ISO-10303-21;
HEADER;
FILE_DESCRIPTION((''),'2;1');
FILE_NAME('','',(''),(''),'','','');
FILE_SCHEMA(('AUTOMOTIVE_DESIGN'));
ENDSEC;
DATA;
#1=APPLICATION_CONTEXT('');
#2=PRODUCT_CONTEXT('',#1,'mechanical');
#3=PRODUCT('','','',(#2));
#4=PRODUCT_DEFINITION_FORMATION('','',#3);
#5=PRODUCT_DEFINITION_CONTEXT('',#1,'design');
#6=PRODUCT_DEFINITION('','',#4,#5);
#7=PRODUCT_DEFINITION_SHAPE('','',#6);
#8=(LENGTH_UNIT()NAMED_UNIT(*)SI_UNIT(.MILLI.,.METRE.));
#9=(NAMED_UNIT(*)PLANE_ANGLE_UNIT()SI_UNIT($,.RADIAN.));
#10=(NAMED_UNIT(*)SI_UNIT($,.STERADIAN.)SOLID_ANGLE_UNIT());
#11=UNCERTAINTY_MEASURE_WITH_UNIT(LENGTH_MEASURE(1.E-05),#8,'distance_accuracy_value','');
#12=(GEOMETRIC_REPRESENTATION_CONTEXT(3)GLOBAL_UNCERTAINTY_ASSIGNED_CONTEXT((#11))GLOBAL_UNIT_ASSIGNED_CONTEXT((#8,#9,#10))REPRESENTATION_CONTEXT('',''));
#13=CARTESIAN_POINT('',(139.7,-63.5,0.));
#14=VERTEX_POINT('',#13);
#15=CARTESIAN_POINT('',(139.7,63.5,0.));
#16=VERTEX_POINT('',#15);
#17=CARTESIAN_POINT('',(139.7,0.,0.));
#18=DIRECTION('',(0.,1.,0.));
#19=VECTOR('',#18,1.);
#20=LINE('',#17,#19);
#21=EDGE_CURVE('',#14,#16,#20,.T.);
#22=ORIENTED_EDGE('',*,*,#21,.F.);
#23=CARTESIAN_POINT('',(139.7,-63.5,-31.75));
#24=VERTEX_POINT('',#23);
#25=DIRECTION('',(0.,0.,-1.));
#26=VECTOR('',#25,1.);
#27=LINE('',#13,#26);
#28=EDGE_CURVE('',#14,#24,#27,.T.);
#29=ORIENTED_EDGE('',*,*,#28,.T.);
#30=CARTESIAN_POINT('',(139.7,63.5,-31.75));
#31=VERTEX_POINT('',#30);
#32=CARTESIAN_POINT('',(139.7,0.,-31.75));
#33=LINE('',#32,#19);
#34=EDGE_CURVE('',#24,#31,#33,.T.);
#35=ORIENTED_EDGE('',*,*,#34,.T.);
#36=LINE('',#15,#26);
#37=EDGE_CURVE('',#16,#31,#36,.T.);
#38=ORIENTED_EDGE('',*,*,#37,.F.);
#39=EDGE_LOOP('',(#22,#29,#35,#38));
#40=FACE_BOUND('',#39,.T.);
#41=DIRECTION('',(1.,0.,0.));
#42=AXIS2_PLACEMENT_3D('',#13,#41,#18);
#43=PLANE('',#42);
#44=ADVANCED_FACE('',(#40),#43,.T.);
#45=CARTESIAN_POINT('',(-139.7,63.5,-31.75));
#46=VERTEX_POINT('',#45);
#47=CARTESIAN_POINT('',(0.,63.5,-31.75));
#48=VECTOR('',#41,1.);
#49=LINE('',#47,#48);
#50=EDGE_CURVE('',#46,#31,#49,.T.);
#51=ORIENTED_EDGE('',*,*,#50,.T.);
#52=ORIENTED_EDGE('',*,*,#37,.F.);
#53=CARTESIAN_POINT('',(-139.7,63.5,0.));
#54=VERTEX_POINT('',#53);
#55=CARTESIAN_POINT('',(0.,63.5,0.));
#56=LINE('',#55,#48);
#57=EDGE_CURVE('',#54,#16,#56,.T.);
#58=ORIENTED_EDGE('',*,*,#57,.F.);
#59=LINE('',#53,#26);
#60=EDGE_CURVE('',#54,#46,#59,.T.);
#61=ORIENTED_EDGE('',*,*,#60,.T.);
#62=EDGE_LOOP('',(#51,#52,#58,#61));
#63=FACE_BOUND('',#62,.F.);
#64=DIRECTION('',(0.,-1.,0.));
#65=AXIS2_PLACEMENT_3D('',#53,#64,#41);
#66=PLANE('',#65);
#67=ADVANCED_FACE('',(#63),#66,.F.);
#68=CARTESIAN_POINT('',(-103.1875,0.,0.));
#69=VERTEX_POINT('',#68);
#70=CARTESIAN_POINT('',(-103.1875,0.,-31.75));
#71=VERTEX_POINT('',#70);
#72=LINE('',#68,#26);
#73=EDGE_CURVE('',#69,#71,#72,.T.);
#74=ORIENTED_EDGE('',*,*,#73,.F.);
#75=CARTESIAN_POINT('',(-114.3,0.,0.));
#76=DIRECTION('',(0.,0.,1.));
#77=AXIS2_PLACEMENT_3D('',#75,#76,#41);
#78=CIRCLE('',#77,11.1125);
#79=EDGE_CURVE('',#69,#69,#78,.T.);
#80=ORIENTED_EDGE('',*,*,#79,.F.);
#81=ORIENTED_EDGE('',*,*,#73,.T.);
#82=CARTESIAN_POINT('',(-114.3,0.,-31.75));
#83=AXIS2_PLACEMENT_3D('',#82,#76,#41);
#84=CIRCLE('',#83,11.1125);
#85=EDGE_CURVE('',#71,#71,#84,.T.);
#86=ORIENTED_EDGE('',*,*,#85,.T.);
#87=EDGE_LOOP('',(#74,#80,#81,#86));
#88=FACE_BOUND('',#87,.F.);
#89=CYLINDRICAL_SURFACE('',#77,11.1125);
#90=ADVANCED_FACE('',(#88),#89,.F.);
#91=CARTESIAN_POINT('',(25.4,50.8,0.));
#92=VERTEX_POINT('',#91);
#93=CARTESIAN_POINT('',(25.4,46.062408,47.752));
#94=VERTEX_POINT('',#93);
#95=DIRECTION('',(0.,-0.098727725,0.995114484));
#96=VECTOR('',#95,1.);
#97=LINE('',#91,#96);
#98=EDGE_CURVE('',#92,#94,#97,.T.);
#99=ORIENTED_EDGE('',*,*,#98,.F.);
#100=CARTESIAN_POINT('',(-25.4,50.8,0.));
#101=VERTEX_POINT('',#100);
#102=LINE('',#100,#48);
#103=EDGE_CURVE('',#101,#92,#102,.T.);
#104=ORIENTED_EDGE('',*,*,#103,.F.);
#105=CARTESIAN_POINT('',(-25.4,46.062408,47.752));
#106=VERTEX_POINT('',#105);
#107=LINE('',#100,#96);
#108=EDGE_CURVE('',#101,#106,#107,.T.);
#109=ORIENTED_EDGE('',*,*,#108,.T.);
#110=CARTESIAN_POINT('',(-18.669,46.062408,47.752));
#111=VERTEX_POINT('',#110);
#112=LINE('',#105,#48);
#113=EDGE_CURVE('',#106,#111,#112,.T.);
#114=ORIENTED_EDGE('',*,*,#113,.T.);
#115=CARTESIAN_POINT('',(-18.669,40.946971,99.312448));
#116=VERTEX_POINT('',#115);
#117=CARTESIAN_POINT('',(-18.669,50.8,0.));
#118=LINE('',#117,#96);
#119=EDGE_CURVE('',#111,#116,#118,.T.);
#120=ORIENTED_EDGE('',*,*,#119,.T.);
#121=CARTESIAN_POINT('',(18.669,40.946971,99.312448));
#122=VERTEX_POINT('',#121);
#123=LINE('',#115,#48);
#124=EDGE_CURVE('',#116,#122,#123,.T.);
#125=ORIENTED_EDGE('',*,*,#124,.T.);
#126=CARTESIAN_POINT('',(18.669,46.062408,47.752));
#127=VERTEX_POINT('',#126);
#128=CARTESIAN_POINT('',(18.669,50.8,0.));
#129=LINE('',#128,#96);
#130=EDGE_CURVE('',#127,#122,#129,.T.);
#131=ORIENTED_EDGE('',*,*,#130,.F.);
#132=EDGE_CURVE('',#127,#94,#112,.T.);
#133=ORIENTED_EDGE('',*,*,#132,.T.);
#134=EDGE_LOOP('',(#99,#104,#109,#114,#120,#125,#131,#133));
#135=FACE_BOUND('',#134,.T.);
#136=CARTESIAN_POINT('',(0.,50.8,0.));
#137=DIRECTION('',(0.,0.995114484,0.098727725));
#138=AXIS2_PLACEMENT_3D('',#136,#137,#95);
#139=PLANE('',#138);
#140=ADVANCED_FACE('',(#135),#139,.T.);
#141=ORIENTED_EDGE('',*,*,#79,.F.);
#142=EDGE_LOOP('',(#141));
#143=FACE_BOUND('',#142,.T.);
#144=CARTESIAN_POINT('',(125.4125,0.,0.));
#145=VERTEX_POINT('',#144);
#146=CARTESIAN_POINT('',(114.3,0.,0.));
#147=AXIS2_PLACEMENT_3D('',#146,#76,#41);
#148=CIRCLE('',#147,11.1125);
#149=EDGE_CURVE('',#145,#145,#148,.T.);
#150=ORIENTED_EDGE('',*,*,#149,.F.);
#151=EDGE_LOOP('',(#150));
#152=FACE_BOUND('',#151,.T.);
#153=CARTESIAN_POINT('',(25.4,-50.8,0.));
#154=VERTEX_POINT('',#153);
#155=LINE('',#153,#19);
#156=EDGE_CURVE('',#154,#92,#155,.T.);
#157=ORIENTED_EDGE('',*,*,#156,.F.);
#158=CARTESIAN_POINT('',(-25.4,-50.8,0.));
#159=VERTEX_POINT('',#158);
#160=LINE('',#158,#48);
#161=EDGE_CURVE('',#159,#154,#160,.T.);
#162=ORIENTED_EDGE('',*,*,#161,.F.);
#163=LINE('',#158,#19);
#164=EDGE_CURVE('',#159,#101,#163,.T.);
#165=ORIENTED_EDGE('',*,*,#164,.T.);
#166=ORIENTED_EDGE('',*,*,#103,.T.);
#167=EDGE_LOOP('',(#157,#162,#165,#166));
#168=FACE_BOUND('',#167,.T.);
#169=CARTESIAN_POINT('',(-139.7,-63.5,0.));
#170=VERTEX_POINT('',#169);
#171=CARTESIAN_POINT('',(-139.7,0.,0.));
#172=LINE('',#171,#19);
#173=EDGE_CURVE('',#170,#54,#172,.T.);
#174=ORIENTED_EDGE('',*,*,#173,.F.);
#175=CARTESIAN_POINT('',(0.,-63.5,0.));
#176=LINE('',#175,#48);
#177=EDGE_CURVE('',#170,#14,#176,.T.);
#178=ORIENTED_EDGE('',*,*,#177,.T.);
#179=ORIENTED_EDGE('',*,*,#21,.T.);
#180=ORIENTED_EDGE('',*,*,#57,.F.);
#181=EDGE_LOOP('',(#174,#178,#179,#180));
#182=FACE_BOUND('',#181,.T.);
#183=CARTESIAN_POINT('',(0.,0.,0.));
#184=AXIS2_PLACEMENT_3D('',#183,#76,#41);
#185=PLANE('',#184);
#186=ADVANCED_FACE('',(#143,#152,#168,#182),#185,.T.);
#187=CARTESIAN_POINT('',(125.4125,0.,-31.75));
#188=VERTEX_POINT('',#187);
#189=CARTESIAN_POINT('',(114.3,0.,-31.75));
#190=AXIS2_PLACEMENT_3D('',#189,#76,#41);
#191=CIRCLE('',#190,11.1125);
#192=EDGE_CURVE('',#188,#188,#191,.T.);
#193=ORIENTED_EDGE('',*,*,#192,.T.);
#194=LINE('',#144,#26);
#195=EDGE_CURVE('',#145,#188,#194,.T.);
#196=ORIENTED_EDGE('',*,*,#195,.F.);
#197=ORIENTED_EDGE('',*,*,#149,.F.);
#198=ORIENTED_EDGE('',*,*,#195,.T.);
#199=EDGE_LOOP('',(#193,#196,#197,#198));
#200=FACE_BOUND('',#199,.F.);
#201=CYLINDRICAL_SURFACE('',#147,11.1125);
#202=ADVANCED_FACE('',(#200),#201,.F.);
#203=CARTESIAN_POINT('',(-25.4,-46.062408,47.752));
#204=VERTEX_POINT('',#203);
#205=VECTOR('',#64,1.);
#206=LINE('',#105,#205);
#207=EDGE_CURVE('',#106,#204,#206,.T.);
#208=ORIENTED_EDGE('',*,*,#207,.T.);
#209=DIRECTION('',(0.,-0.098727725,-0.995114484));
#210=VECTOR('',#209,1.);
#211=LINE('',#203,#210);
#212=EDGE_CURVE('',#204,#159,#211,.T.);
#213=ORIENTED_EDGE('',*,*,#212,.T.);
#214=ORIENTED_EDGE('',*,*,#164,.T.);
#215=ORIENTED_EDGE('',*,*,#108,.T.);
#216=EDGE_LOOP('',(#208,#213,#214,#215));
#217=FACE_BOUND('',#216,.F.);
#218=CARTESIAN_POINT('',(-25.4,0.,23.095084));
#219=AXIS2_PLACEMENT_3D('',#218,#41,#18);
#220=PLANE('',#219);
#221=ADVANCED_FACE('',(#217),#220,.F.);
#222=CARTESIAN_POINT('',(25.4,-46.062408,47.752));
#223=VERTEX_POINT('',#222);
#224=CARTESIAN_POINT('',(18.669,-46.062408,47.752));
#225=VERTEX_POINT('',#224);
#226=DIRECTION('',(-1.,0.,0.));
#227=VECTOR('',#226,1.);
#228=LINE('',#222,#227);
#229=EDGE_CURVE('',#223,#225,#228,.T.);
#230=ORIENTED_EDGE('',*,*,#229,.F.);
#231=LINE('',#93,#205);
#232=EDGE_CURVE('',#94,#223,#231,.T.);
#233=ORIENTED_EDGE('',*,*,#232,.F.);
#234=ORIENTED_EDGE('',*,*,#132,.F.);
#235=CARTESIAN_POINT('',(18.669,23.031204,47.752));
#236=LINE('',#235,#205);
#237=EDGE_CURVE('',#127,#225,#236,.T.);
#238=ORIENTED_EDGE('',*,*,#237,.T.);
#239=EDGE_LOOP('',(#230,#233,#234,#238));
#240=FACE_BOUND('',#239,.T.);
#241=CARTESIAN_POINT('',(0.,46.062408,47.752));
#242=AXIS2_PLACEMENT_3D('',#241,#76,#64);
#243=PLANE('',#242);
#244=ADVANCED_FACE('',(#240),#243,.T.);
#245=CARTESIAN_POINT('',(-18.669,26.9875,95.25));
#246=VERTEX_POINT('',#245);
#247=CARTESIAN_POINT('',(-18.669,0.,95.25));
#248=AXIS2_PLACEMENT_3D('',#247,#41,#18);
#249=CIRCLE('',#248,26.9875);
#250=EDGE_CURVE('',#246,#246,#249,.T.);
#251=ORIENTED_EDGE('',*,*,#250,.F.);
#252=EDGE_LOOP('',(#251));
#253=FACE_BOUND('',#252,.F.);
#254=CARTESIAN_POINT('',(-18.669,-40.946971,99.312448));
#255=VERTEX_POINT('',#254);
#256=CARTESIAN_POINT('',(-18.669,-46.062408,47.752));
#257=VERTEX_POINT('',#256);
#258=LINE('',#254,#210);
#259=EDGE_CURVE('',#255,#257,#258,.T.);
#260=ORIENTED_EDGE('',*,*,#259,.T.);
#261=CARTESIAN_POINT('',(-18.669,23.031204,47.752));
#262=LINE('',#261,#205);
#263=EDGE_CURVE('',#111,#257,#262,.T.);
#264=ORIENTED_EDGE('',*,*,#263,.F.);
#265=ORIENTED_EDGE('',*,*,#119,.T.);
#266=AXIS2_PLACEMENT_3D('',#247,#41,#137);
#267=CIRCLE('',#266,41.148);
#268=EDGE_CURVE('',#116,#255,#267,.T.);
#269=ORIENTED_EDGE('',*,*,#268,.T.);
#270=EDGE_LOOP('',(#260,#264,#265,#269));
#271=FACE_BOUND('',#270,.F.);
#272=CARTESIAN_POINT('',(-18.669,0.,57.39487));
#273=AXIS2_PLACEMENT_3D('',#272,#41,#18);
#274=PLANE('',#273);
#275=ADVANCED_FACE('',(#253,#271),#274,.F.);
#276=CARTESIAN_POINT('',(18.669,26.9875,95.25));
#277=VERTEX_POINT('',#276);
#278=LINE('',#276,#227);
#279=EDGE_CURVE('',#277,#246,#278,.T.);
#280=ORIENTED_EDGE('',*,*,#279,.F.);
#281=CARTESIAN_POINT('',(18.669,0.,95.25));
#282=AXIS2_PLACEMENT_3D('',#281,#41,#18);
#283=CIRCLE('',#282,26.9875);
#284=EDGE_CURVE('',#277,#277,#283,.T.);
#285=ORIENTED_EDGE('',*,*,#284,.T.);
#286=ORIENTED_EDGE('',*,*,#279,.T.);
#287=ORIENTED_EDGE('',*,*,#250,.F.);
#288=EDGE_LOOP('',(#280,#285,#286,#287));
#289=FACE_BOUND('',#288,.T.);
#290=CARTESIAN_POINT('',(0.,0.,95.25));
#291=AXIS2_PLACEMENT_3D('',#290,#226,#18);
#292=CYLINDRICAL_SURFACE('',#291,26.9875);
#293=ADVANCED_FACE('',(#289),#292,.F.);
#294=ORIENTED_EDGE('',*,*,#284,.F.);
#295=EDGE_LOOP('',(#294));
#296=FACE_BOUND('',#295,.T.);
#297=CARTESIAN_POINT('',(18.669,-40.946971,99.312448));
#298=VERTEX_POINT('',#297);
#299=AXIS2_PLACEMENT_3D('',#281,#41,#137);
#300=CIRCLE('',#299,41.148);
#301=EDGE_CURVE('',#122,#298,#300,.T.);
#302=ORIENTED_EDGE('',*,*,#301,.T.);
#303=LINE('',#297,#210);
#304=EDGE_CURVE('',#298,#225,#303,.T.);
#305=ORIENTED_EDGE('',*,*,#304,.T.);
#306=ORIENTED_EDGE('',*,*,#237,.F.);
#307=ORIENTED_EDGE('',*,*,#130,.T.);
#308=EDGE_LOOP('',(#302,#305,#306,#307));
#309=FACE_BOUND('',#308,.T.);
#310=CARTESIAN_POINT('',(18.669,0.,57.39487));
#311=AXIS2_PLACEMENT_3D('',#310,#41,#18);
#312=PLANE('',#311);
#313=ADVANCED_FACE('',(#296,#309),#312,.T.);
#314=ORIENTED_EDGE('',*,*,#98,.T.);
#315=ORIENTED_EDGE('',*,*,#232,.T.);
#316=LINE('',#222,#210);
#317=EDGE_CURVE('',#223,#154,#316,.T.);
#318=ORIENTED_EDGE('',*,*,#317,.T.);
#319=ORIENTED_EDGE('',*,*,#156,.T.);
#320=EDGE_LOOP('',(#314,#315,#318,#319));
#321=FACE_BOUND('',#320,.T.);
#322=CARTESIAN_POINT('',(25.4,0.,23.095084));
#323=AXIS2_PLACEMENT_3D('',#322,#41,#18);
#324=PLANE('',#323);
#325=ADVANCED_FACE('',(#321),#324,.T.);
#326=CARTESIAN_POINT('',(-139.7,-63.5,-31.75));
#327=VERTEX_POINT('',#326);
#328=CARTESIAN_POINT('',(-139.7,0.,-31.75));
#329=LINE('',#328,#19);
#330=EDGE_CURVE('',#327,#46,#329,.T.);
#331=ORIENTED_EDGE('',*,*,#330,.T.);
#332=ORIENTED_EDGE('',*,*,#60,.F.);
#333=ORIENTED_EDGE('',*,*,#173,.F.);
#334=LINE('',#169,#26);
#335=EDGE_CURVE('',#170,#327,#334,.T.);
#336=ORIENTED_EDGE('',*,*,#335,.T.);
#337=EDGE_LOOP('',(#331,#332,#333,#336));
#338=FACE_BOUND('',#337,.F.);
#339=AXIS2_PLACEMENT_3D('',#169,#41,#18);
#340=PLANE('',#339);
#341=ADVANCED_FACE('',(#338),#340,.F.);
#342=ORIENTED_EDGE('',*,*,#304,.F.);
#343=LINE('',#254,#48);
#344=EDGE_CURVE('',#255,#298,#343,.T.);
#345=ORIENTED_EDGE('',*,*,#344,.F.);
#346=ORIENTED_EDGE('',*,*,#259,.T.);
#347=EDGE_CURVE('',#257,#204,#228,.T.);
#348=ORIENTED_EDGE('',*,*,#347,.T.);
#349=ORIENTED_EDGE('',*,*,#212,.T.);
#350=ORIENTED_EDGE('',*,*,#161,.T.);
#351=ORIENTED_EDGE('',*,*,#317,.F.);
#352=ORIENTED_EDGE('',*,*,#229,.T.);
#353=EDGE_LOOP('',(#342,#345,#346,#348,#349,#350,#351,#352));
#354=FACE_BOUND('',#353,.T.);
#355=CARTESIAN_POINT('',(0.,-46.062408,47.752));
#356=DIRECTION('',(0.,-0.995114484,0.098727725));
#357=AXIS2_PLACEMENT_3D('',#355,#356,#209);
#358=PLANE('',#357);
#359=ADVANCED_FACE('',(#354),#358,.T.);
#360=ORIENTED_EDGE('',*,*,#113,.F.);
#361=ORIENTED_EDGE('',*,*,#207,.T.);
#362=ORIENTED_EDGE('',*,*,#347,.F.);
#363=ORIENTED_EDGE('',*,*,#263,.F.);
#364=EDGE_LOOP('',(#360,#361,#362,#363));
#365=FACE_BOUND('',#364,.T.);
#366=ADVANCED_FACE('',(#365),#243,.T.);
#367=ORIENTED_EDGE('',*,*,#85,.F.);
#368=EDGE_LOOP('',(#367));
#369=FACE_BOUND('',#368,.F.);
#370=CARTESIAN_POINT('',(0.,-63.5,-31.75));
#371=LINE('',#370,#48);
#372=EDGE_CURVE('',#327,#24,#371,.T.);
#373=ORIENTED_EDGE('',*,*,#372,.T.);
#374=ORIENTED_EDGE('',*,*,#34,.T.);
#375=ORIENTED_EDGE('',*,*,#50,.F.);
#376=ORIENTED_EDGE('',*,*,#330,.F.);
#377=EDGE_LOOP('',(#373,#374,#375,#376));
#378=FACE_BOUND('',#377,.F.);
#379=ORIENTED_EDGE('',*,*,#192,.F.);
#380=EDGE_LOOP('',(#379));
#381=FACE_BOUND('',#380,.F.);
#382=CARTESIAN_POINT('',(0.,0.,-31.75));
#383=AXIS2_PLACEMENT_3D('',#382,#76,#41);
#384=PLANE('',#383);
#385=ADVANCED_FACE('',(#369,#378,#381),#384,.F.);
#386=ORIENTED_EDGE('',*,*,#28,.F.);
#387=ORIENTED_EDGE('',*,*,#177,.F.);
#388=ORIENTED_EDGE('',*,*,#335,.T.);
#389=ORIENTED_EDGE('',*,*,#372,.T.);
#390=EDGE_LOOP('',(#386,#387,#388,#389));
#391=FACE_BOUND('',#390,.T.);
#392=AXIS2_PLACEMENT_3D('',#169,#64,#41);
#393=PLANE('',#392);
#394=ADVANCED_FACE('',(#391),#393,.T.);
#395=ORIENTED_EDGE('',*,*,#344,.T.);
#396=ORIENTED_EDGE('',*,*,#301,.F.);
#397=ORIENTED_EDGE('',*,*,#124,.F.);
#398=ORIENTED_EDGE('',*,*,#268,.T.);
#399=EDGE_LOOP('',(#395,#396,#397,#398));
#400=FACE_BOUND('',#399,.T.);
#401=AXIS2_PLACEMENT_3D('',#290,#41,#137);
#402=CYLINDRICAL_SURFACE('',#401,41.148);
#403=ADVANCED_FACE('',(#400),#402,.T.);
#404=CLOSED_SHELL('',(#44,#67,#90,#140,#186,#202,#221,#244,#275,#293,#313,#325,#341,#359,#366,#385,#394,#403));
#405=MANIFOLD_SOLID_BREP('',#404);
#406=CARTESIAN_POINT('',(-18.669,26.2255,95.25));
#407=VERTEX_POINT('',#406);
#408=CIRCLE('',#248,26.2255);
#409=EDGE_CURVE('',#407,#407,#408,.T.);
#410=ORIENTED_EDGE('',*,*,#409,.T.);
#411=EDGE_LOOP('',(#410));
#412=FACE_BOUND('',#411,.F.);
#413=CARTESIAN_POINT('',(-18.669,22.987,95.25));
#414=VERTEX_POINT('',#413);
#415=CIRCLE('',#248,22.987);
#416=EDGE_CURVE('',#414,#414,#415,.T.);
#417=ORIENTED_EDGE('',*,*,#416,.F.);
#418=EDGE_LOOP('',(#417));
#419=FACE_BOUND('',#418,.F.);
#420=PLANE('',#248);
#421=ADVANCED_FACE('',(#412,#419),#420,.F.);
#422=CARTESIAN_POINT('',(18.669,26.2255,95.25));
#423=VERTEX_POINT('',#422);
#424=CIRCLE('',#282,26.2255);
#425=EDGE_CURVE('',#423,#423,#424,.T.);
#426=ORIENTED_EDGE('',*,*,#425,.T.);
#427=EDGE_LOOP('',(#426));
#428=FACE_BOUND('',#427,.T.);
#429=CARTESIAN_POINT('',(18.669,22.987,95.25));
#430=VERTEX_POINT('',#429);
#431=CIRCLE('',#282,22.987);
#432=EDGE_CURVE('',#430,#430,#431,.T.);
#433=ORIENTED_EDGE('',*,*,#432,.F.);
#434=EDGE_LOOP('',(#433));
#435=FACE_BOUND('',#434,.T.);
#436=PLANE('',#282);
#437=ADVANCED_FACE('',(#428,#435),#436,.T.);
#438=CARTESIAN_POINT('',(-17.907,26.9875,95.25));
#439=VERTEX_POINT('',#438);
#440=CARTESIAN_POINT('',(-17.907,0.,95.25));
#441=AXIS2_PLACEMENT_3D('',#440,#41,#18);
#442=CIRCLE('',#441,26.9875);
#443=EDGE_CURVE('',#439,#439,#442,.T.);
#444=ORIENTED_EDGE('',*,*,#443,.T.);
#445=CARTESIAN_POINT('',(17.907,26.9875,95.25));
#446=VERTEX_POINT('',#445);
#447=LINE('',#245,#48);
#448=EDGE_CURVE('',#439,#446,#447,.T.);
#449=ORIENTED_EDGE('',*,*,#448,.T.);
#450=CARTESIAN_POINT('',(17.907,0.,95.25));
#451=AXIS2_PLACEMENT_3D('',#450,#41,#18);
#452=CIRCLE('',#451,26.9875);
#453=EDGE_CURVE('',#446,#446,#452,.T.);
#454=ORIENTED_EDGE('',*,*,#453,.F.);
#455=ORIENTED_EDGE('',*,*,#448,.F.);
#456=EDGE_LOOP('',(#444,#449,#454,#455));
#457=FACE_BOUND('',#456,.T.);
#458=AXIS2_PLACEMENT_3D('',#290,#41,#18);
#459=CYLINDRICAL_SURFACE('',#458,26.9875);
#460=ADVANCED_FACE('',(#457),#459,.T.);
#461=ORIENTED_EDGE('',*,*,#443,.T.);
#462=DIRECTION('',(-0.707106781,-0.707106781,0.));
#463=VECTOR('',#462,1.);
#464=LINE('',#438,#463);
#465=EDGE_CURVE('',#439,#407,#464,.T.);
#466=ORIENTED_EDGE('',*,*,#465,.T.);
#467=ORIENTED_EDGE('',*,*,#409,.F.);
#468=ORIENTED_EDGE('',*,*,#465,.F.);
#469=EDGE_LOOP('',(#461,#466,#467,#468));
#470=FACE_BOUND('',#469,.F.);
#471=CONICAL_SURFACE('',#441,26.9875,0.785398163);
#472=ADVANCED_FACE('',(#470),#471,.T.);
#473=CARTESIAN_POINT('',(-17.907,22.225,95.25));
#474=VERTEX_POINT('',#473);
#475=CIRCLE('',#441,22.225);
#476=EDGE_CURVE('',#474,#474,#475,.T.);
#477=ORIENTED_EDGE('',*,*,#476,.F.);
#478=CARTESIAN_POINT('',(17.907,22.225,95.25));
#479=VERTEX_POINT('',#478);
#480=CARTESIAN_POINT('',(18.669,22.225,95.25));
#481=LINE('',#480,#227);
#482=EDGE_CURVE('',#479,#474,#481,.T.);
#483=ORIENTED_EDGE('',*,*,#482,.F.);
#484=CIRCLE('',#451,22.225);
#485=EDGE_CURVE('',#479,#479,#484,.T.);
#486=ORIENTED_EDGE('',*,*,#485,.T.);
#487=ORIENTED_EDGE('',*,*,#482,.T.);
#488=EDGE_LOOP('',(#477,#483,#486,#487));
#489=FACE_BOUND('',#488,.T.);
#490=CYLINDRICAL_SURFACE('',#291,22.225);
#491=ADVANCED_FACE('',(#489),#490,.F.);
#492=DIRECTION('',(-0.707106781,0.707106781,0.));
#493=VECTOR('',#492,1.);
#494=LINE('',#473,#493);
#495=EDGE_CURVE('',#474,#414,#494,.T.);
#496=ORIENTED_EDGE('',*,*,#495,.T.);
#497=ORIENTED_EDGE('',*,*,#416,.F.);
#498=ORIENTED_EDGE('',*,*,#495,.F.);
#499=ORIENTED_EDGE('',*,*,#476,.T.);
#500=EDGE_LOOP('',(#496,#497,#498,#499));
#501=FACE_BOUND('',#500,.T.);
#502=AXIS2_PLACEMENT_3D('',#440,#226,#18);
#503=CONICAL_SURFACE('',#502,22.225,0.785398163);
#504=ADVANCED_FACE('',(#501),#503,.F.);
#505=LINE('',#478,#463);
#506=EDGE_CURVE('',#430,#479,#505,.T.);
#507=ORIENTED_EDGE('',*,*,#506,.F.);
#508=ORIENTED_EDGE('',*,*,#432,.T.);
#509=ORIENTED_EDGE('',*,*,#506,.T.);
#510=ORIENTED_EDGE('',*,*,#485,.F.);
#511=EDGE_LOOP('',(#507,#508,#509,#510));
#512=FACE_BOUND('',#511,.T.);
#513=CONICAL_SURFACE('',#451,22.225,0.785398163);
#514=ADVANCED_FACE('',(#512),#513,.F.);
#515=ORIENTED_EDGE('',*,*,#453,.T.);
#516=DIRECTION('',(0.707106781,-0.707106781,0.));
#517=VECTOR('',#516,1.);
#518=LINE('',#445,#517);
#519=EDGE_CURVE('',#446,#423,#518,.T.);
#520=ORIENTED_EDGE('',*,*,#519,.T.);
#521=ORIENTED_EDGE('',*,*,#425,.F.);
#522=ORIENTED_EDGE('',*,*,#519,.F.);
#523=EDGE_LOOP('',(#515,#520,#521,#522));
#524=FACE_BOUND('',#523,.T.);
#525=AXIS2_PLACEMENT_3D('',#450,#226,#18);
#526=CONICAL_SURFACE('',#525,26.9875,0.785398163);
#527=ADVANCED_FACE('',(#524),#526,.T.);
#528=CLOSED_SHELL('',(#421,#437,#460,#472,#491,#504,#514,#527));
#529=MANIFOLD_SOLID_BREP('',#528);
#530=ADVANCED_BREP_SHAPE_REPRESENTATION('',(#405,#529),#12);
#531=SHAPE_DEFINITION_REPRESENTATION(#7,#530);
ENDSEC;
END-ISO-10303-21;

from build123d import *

# Parameters (mm, degrees)
F0_W     = 279.4
F0_H     = 127
F0_R     = 11.1125
F1_DEPTH = 31.75
F2_R     = 26.9875
F3_DEPTH = 18.669
F5_DEPTH = 25.4
F6_R     = 26.9875
F6_R_2   = 22.225
F7_DEPTH = 18.669
F8_SIZE  = 0.762


with BuildPart() as f1:
    # F0 (on Top) → F1 (new body)
    with BuildSketch(Plane.XY):
        Rectangle(F0_W, F0_H)
        with Locations((-114.3, 0)):
            Circle(F0_R, mode=Mode.SUBTRACT)
        with Locations((114.3, 0)):
            Circle(F0_R, mode=Mode.SUBTRACT)
    extrude(amount=-F1_DEPTH)

    # F2 (on Right) → F3 (join, symmetric)
    with BuildSketch(Plane.YZ):
        with BuildLine():
            Line((50.8, 0), (40.9469707894, 99.312448421))
            ThreePointArc((40.9469707894, 99.312448421), (0, 136.398), (-40.9469707894, 99.312448421))
            Line((-40.9469707894, 99.312448421), (-50.8, 0))
            Line((-50.8, 0), (50.8, 0))
        make_face()
        with Locations((0, 95.25)):
            Circle(F2_R, mode=Mode.SUBTRACT)
    extrude(amount=F3_DEPTH, both=True)

    # F4 (on Right) → F5 (join, symmetric)
    with BuildSketch(Plane.YZ):
        Polygon((-50.8, 0), (50.8, 0), (46.0624081035, 47.752), (-46.0624081035, 47.752), align=None)
    extrude(amount=F5_DEPTH, both=True)


with BuildPart() as f7:
    # F6 (on Right) → F7 (new body, symmetric)
    with BuildSketch(Plane.YZ):
        with Locations((0, 95.25)):
            Circle(F6_R)
        with Locations((0, 95.25)):
            Circle(F6_R_2, mode=Mode.SUBTRACT)
    extrude(amount=F7_DEPTH, both=True)

    # F8
    f8_edges = [f7.edges().sort_by_distance(p)[0] for p in [
        (-18.669, -26.9875, 95.25),
        (-18.669, -22.225, 95.25),
        (18.669, -26.9875, 95.25),
        (18.669, -22.225, 95.25),
    ]]
    chamfer(f8_edges, length=F8_SIZE)


solid = Compound([f1.part, f7.part])
